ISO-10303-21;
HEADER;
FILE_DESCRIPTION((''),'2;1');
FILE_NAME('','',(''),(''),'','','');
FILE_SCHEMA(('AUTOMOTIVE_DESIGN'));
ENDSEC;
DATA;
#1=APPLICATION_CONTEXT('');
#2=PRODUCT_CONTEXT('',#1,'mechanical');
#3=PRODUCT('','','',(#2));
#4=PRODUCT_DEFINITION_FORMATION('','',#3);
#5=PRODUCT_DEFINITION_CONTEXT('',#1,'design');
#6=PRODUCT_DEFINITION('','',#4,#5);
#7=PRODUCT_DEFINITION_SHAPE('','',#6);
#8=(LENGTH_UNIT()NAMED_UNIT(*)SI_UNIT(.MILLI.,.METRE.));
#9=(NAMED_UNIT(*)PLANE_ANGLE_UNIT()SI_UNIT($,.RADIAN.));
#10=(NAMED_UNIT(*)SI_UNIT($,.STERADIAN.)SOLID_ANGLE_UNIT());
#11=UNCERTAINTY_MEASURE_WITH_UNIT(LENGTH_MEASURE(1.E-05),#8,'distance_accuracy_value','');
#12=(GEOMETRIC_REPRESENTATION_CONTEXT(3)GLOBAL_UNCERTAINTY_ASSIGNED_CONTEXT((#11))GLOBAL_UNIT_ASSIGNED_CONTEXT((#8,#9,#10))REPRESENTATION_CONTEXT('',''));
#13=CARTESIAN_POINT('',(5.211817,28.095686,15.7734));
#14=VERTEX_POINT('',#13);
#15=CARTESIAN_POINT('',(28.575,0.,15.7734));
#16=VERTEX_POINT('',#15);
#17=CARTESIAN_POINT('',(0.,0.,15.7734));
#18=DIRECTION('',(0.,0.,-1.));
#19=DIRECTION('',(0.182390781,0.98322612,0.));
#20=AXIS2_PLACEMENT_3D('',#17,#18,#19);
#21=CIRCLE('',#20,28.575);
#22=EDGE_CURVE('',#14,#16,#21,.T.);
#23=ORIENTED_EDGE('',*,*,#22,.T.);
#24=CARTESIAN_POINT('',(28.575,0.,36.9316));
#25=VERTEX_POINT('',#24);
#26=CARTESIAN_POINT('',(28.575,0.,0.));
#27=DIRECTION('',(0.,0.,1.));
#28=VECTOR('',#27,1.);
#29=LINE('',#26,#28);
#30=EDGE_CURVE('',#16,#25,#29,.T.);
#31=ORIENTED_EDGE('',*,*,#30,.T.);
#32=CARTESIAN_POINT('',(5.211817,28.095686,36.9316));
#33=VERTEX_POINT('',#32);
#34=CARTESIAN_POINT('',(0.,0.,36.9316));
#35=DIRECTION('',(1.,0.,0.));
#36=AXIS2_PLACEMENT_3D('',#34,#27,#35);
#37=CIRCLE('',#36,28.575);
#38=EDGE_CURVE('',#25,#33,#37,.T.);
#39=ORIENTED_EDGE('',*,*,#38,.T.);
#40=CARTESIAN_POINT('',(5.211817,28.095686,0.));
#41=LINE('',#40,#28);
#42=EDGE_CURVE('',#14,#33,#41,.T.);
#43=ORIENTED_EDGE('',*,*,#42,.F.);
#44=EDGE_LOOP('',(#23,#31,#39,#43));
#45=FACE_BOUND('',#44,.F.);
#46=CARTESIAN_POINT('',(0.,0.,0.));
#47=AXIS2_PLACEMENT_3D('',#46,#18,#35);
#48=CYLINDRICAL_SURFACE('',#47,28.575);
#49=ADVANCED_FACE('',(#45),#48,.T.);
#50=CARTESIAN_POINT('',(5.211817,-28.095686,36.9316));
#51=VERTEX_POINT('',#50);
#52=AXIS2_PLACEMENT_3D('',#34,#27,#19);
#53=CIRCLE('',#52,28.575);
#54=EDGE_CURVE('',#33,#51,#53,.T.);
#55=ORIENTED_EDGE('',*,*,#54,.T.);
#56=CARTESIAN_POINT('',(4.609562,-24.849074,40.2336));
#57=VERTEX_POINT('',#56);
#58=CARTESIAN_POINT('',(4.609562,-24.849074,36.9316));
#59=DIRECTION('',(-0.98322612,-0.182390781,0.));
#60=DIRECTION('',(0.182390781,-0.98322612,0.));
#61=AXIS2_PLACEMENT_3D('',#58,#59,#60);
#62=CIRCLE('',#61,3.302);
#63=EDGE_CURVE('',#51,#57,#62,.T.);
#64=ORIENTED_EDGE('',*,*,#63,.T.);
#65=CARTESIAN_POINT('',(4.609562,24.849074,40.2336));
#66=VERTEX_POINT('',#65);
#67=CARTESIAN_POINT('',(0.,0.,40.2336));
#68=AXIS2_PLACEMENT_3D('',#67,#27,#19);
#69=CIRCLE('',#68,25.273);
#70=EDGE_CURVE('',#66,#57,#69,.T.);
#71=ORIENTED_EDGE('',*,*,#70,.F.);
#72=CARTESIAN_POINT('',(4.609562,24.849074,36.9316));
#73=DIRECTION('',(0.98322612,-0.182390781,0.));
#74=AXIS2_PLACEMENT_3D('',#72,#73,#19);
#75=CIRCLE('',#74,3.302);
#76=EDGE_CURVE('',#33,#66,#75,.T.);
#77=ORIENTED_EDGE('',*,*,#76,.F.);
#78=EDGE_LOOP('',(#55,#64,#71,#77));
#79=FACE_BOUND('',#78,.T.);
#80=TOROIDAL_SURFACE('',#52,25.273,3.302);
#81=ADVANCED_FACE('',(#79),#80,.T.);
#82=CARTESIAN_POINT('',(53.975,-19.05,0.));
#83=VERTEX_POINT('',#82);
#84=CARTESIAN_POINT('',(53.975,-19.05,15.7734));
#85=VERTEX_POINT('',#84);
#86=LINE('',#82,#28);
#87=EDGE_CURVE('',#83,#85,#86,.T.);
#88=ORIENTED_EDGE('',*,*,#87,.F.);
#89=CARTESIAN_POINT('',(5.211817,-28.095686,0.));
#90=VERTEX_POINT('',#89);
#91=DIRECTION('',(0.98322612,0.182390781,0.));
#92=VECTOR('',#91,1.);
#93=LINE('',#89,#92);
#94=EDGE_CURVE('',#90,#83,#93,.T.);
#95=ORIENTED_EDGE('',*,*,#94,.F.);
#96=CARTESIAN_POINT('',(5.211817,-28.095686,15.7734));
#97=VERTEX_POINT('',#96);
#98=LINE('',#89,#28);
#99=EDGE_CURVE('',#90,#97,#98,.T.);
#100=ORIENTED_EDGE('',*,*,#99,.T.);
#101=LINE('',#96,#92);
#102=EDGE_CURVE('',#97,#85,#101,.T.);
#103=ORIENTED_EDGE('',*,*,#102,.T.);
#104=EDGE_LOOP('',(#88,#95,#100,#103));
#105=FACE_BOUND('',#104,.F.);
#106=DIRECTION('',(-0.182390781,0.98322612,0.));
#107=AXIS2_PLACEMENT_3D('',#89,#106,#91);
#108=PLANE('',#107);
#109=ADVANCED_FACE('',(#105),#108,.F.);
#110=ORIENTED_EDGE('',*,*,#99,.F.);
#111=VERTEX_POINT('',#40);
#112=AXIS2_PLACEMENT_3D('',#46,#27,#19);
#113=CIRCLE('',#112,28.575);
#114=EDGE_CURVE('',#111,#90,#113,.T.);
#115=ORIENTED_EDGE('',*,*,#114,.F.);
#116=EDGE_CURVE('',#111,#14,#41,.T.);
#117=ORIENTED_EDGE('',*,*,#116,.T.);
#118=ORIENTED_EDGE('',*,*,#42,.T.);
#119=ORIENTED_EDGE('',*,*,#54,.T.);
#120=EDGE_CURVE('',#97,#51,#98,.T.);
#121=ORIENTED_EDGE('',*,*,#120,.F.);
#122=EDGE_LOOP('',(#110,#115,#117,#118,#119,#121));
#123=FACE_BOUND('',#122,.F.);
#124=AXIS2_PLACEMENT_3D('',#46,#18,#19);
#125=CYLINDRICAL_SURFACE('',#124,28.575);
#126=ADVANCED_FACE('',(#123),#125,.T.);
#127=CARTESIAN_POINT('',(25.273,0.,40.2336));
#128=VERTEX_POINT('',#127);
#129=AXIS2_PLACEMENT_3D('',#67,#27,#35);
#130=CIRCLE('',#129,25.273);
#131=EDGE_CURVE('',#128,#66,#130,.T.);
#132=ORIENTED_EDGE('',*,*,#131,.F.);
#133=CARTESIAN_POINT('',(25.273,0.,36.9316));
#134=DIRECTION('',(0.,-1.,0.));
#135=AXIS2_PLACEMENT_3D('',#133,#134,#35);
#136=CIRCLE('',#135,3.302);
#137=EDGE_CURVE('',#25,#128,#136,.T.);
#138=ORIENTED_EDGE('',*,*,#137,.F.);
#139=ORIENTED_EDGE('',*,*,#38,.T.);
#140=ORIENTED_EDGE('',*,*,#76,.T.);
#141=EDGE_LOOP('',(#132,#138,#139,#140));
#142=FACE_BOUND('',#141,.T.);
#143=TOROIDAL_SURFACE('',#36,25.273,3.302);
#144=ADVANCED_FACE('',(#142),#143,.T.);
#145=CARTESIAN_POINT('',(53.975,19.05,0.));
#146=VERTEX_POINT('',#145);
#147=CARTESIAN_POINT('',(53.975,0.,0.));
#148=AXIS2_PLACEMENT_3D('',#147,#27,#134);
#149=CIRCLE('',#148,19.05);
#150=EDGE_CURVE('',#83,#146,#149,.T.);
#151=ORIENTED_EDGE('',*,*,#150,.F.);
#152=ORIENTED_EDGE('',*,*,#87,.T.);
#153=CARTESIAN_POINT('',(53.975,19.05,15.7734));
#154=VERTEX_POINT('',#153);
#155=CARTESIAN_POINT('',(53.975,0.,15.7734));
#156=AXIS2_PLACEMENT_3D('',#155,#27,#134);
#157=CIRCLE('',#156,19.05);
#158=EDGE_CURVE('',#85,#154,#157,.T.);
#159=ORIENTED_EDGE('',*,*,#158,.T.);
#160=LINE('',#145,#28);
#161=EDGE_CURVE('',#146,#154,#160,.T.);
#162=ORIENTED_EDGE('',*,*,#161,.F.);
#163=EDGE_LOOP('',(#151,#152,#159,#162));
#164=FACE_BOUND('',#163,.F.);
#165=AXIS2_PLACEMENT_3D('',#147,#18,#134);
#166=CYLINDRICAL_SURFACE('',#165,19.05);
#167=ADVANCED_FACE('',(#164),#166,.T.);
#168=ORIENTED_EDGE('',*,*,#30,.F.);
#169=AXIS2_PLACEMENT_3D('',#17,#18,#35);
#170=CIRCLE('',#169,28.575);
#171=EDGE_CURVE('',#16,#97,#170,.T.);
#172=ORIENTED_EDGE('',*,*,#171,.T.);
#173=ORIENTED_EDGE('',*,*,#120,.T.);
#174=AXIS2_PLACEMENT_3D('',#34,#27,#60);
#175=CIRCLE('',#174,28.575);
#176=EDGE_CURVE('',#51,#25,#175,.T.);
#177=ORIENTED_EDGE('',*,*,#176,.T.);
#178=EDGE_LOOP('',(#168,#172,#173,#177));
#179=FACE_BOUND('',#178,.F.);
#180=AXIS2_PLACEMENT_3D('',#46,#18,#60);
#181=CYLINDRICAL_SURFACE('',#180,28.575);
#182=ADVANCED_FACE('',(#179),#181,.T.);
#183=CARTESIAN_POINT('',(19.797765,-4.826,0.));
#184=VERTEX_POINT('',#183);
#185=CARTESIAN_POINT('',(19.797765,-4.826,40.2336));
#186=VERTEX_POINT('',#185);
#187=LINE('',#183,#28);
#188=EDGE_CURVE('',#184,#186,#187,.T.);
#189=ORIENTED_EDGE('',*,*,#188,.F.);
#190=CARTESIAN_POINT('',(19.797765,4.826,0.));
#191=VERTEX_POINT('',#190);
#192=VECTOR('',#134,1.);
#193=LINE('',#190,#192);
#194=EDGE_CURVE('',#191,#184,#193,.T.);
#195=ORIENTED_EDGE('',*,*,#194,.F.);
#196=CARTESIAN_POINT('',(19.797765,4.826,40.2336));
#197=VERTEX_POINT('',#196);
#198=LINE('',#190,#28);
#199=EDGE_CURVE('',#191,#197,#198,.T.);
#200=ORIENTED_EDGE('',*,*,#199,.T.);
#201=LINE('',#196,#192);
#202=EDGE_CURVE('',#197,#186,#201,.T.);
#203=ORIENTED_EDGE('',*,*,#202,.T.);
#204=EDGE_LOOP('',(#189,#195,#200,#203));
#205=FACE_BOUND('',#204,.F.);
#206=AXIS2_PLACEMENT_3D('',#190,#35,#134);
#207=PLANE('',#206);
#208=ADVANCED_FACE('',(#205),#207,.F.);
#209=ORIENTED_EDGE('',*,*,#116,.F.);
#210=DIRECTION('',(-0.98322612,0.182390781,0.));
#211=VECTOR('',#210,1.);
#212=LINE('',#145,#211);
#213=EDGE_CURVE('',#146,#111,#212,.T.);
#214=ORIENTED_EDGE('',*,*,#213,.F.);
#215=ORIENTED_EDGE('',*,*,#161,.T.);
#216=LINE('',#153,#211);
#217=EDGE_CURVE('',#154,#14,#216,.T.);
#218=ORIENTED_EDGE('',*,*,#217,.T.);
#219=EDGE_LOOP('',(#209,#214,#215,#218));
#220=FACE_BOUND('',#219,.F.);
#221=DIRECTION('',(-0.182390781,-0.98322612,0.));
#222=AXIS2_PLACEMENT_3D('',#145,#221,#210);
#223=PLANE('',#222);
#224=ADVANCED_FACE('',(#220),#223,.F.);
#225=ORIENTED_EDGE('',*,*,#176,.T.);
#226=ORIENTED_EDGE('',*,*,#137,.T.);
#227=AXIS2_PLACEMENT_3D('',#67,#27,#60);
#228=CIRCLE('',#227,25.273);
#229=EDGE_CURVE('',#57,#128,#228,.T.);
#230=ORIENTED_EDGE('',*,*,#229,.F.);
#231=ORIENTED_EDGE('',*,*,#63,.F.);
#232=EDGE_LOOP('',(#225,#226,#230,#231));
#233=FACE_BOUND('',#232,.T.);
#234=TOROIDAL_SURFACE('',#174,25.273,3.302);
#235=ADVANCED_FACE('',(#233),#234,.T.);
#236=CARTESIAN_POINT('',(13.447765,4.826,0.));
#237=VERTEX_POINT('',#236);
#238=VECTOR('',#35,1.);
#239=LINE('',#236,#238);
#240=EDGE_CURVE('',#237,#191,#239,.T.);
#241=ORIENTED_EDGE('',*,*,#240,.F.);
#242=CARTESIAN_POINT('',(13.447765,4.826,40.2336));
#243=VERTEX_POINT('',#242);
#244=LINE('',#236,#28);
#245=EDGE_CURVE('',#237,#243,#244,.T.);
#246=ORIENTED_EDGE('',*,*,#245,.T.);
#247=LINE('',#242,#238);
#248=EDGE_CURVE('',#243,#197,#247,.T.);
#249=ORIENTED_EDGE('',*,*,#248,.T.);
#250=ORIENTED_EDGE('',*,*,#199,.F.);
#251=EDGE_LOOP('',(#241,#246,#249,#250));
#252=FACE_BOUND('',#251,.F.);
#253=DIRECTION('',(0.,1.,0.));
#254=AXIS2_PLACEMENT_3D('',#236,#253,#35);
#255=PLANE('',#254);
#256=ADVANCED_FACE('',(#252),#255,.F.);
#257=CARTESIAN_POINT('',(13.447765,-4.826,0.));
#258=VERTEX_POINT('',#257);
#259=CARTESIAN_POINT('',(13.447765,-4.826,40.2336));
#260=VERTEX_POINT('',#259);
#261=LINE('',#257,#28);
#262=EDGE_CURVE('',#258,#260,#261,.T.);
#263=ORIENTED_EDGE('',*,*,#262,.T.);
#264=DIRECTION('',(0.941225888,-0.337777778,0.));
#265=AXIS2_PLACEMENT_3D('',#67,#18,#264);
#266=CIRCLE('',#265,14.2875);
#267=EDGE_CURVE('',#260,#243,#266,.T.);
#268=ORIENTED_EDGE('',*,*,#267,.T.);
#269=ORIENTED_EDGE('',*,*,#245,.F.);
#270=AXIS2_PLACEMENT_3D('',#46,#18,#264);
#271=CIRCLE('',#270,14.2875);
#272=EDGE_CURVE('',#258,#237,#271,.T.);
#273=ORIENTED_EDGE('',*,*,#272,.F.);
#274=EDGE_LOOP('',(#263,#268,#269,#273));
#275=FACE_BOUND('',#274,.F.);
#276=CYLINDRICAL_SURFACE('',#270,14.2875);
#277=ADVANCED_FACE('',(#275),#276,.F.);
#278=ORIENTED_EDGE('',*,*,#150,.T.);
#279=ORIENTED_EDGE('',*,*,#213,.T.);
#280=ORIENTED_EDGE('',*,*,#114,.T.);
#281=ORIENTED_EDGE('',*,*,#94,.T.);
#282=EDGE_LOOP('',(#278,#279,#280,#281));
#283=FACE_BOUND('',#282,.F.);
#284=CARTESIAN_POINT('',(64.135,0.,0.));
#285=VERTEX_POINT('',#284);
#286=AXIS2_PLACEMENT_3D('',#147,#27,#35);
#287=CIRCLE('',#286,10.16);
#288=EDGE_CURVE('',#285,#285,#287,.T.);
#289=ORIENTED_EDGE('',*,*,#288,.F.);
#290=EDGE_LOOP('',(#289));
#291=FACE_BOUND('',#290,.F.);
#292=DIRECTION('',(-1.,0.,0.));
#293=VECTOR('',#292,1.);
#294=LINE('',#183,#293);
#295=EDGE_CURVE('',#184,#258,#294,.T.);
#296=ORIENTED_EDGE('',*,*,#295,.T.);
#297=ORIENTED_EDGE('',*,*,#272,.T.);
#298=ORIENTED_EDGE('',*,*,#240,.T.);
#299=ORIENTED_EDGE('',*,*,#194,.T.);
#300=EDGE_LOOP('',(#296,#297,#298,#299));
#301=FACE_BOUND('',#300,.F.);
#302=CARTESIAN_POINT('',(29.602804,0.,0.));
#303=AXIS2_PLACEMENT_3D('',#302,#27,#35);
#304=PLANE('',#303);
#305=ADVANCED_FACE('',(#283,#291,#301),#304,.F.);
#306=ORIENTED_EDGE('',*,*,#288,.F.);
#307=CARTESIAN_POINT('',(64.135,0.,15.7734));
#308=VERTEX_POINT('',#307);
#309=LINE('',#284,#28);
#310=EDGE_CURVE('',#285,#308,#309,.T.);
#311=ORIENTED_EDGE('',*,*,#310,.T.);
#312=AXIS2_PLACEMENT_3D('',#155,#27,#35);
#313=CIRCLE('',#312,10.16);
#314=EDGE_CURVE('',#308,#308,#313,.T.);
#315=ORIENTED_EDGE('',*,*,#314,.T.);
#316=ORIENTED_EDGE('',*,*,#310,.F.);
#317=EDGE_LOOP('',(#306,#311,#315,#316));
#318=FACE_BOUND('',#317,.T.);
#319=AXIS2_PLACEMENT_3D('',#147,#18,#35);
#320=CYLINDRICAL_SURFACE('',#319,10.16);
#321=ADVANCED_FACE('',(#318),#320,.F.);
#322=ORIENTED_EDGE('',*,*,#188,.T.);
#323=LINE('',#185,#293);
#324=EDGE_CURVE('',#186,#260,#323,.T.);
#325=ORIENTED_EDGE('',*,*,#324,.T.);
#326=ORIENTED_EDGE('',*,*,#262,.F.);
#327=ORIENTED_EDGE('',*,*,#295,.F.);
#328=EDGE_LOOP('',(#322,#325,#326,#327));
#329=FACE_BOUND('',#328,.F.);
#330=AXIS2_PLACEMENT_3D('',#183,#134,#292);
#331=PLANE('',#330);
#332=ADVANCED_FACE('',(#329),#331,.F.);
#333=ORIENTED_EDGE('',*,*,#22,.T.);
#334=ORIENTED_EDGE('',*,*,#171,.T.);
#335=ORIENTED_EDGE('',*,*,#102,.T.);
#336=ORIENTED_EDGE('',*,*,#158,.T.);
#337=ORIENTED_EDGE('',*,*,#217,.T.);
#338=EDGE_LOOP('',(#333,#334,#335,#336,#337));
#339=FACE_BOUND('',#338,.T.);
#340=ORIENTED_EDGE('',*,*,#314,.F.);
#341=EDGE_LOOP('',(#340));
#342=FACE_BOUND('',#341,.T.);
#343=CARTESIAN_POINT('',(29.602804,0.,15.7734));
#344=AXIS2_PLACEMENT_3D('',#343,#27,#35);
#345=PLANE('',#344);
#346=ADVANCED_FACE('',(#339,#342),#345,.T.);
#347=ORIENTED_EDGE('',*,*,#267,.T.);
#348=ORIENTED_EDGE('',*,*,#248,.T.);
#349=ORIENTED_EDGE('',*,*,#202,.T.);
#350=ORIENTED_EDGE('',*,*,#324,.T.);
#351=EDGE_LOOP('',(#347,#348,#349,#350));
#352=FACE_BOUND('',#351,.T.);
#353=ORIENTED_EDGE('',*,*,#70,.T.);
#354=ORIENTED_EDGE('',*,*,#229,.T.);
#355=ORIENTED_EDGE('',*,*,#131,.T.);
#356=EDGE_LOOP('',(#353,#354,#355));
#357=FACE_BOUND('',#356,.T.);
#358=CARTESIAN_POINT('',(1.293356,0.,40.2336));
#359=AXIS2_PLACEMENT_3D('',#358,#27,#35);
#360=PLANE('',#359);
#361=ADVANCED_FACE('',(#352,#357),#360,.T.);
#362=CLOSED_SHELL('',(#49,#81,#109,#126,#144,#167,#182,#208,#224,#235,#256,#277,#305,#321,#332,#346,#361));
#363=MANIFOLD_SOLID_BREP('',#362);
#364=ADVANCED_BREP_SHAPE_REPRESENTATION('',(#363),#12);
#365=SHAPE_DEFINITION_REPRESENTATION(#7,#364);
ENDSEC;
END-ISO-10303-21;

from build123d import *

# Parameters (mm, degrees)
F1_DEPTH = 40.2336
F0_R     = 10.16
F2_DEPTH = 15.7734
F3_R     = 3.302


# Not quite as in the source:
# - a feature names something its author has since deleted; it is built from what else it names


with BuildPart() as f1:
    # F0 (on Top) → F1 (new body)
    with BuildSketch(Plane.XY):
        with BuildLine():
            ThreePointArc((5.2118165727, -28.0956863773), (21.9710978739, -18.2702348977), (28.575, 0))
            ThreePointArc((28.575, 0), (21.9710978739, 18.2702348977), (5.2118165727, 28.0956863773))
            ThreePointArc((5.2118165727, 28.0956863773), (-28.575, 0), (5.2118165727, -28.0956863773))
        make_face()
        with BuildLine():
            ThreePointArc((13.4477648793, -4.826), (-14.2875, 0), (13.4477648793, 4.826))
            Line((13.4477648793, 4.826), (19.7977648793, 4.826))
            Line((19.7977648793, 4.826), (19.7977648793, -4.826))
            Line((19.7977648793, -4.826), (13.4477648793, -4.826))
        make_face(mode=Mode.SUBTRACT)
    extrude(amount=F1_DEPTH)

    # F0 (on Top) → F2 (join)
    with BuildSketch(Plane.XY):
        with BuildLine():
            ThreePointArc((5.2118165727, 28.0956863773), (21.9710978739, 18.2702348977), (28.575, 0))
            ThreePointArc((28.575, 0), (21.9710978739, -18.2702348977), (5.2118165727, -28.0956863773))
            Line((5.2118165727, -28.0956863773), (53.975, -19.05))
            ThreePointArc((53.975, -19.05), (34.925, 0), (53.975, 19.05))
            Line((53.975, 19.05), (5.2118165727, 28.0956863773))
        make_face()
        with BuildLine():
            ThreePointArc((73.025, 0), (67.4453841816, 13.4703841816), (53.975, 19.05))
            ThreePointArc((53.975, 19.05), (34.925, 0), (53.975, -19.05))
            ThreePointArc((53.975, -19.05), (67.4453841816, -13.4703841816), (73.025, 0))
        make_face()
        with Locations((53.975, 0)):
            Circle(F0_R, mode=Mode.SUBTRACT)
    extrude(amount=F2_DEPTH)

    # F3
    f3_edges = [f1.edges().sort_by_distance(p)[0] for p in [
        (-5.211817, 28.095686, 40.2336),
    ]]
    fillet(f3_edges, radius=F3_R)


solid = f1.part
